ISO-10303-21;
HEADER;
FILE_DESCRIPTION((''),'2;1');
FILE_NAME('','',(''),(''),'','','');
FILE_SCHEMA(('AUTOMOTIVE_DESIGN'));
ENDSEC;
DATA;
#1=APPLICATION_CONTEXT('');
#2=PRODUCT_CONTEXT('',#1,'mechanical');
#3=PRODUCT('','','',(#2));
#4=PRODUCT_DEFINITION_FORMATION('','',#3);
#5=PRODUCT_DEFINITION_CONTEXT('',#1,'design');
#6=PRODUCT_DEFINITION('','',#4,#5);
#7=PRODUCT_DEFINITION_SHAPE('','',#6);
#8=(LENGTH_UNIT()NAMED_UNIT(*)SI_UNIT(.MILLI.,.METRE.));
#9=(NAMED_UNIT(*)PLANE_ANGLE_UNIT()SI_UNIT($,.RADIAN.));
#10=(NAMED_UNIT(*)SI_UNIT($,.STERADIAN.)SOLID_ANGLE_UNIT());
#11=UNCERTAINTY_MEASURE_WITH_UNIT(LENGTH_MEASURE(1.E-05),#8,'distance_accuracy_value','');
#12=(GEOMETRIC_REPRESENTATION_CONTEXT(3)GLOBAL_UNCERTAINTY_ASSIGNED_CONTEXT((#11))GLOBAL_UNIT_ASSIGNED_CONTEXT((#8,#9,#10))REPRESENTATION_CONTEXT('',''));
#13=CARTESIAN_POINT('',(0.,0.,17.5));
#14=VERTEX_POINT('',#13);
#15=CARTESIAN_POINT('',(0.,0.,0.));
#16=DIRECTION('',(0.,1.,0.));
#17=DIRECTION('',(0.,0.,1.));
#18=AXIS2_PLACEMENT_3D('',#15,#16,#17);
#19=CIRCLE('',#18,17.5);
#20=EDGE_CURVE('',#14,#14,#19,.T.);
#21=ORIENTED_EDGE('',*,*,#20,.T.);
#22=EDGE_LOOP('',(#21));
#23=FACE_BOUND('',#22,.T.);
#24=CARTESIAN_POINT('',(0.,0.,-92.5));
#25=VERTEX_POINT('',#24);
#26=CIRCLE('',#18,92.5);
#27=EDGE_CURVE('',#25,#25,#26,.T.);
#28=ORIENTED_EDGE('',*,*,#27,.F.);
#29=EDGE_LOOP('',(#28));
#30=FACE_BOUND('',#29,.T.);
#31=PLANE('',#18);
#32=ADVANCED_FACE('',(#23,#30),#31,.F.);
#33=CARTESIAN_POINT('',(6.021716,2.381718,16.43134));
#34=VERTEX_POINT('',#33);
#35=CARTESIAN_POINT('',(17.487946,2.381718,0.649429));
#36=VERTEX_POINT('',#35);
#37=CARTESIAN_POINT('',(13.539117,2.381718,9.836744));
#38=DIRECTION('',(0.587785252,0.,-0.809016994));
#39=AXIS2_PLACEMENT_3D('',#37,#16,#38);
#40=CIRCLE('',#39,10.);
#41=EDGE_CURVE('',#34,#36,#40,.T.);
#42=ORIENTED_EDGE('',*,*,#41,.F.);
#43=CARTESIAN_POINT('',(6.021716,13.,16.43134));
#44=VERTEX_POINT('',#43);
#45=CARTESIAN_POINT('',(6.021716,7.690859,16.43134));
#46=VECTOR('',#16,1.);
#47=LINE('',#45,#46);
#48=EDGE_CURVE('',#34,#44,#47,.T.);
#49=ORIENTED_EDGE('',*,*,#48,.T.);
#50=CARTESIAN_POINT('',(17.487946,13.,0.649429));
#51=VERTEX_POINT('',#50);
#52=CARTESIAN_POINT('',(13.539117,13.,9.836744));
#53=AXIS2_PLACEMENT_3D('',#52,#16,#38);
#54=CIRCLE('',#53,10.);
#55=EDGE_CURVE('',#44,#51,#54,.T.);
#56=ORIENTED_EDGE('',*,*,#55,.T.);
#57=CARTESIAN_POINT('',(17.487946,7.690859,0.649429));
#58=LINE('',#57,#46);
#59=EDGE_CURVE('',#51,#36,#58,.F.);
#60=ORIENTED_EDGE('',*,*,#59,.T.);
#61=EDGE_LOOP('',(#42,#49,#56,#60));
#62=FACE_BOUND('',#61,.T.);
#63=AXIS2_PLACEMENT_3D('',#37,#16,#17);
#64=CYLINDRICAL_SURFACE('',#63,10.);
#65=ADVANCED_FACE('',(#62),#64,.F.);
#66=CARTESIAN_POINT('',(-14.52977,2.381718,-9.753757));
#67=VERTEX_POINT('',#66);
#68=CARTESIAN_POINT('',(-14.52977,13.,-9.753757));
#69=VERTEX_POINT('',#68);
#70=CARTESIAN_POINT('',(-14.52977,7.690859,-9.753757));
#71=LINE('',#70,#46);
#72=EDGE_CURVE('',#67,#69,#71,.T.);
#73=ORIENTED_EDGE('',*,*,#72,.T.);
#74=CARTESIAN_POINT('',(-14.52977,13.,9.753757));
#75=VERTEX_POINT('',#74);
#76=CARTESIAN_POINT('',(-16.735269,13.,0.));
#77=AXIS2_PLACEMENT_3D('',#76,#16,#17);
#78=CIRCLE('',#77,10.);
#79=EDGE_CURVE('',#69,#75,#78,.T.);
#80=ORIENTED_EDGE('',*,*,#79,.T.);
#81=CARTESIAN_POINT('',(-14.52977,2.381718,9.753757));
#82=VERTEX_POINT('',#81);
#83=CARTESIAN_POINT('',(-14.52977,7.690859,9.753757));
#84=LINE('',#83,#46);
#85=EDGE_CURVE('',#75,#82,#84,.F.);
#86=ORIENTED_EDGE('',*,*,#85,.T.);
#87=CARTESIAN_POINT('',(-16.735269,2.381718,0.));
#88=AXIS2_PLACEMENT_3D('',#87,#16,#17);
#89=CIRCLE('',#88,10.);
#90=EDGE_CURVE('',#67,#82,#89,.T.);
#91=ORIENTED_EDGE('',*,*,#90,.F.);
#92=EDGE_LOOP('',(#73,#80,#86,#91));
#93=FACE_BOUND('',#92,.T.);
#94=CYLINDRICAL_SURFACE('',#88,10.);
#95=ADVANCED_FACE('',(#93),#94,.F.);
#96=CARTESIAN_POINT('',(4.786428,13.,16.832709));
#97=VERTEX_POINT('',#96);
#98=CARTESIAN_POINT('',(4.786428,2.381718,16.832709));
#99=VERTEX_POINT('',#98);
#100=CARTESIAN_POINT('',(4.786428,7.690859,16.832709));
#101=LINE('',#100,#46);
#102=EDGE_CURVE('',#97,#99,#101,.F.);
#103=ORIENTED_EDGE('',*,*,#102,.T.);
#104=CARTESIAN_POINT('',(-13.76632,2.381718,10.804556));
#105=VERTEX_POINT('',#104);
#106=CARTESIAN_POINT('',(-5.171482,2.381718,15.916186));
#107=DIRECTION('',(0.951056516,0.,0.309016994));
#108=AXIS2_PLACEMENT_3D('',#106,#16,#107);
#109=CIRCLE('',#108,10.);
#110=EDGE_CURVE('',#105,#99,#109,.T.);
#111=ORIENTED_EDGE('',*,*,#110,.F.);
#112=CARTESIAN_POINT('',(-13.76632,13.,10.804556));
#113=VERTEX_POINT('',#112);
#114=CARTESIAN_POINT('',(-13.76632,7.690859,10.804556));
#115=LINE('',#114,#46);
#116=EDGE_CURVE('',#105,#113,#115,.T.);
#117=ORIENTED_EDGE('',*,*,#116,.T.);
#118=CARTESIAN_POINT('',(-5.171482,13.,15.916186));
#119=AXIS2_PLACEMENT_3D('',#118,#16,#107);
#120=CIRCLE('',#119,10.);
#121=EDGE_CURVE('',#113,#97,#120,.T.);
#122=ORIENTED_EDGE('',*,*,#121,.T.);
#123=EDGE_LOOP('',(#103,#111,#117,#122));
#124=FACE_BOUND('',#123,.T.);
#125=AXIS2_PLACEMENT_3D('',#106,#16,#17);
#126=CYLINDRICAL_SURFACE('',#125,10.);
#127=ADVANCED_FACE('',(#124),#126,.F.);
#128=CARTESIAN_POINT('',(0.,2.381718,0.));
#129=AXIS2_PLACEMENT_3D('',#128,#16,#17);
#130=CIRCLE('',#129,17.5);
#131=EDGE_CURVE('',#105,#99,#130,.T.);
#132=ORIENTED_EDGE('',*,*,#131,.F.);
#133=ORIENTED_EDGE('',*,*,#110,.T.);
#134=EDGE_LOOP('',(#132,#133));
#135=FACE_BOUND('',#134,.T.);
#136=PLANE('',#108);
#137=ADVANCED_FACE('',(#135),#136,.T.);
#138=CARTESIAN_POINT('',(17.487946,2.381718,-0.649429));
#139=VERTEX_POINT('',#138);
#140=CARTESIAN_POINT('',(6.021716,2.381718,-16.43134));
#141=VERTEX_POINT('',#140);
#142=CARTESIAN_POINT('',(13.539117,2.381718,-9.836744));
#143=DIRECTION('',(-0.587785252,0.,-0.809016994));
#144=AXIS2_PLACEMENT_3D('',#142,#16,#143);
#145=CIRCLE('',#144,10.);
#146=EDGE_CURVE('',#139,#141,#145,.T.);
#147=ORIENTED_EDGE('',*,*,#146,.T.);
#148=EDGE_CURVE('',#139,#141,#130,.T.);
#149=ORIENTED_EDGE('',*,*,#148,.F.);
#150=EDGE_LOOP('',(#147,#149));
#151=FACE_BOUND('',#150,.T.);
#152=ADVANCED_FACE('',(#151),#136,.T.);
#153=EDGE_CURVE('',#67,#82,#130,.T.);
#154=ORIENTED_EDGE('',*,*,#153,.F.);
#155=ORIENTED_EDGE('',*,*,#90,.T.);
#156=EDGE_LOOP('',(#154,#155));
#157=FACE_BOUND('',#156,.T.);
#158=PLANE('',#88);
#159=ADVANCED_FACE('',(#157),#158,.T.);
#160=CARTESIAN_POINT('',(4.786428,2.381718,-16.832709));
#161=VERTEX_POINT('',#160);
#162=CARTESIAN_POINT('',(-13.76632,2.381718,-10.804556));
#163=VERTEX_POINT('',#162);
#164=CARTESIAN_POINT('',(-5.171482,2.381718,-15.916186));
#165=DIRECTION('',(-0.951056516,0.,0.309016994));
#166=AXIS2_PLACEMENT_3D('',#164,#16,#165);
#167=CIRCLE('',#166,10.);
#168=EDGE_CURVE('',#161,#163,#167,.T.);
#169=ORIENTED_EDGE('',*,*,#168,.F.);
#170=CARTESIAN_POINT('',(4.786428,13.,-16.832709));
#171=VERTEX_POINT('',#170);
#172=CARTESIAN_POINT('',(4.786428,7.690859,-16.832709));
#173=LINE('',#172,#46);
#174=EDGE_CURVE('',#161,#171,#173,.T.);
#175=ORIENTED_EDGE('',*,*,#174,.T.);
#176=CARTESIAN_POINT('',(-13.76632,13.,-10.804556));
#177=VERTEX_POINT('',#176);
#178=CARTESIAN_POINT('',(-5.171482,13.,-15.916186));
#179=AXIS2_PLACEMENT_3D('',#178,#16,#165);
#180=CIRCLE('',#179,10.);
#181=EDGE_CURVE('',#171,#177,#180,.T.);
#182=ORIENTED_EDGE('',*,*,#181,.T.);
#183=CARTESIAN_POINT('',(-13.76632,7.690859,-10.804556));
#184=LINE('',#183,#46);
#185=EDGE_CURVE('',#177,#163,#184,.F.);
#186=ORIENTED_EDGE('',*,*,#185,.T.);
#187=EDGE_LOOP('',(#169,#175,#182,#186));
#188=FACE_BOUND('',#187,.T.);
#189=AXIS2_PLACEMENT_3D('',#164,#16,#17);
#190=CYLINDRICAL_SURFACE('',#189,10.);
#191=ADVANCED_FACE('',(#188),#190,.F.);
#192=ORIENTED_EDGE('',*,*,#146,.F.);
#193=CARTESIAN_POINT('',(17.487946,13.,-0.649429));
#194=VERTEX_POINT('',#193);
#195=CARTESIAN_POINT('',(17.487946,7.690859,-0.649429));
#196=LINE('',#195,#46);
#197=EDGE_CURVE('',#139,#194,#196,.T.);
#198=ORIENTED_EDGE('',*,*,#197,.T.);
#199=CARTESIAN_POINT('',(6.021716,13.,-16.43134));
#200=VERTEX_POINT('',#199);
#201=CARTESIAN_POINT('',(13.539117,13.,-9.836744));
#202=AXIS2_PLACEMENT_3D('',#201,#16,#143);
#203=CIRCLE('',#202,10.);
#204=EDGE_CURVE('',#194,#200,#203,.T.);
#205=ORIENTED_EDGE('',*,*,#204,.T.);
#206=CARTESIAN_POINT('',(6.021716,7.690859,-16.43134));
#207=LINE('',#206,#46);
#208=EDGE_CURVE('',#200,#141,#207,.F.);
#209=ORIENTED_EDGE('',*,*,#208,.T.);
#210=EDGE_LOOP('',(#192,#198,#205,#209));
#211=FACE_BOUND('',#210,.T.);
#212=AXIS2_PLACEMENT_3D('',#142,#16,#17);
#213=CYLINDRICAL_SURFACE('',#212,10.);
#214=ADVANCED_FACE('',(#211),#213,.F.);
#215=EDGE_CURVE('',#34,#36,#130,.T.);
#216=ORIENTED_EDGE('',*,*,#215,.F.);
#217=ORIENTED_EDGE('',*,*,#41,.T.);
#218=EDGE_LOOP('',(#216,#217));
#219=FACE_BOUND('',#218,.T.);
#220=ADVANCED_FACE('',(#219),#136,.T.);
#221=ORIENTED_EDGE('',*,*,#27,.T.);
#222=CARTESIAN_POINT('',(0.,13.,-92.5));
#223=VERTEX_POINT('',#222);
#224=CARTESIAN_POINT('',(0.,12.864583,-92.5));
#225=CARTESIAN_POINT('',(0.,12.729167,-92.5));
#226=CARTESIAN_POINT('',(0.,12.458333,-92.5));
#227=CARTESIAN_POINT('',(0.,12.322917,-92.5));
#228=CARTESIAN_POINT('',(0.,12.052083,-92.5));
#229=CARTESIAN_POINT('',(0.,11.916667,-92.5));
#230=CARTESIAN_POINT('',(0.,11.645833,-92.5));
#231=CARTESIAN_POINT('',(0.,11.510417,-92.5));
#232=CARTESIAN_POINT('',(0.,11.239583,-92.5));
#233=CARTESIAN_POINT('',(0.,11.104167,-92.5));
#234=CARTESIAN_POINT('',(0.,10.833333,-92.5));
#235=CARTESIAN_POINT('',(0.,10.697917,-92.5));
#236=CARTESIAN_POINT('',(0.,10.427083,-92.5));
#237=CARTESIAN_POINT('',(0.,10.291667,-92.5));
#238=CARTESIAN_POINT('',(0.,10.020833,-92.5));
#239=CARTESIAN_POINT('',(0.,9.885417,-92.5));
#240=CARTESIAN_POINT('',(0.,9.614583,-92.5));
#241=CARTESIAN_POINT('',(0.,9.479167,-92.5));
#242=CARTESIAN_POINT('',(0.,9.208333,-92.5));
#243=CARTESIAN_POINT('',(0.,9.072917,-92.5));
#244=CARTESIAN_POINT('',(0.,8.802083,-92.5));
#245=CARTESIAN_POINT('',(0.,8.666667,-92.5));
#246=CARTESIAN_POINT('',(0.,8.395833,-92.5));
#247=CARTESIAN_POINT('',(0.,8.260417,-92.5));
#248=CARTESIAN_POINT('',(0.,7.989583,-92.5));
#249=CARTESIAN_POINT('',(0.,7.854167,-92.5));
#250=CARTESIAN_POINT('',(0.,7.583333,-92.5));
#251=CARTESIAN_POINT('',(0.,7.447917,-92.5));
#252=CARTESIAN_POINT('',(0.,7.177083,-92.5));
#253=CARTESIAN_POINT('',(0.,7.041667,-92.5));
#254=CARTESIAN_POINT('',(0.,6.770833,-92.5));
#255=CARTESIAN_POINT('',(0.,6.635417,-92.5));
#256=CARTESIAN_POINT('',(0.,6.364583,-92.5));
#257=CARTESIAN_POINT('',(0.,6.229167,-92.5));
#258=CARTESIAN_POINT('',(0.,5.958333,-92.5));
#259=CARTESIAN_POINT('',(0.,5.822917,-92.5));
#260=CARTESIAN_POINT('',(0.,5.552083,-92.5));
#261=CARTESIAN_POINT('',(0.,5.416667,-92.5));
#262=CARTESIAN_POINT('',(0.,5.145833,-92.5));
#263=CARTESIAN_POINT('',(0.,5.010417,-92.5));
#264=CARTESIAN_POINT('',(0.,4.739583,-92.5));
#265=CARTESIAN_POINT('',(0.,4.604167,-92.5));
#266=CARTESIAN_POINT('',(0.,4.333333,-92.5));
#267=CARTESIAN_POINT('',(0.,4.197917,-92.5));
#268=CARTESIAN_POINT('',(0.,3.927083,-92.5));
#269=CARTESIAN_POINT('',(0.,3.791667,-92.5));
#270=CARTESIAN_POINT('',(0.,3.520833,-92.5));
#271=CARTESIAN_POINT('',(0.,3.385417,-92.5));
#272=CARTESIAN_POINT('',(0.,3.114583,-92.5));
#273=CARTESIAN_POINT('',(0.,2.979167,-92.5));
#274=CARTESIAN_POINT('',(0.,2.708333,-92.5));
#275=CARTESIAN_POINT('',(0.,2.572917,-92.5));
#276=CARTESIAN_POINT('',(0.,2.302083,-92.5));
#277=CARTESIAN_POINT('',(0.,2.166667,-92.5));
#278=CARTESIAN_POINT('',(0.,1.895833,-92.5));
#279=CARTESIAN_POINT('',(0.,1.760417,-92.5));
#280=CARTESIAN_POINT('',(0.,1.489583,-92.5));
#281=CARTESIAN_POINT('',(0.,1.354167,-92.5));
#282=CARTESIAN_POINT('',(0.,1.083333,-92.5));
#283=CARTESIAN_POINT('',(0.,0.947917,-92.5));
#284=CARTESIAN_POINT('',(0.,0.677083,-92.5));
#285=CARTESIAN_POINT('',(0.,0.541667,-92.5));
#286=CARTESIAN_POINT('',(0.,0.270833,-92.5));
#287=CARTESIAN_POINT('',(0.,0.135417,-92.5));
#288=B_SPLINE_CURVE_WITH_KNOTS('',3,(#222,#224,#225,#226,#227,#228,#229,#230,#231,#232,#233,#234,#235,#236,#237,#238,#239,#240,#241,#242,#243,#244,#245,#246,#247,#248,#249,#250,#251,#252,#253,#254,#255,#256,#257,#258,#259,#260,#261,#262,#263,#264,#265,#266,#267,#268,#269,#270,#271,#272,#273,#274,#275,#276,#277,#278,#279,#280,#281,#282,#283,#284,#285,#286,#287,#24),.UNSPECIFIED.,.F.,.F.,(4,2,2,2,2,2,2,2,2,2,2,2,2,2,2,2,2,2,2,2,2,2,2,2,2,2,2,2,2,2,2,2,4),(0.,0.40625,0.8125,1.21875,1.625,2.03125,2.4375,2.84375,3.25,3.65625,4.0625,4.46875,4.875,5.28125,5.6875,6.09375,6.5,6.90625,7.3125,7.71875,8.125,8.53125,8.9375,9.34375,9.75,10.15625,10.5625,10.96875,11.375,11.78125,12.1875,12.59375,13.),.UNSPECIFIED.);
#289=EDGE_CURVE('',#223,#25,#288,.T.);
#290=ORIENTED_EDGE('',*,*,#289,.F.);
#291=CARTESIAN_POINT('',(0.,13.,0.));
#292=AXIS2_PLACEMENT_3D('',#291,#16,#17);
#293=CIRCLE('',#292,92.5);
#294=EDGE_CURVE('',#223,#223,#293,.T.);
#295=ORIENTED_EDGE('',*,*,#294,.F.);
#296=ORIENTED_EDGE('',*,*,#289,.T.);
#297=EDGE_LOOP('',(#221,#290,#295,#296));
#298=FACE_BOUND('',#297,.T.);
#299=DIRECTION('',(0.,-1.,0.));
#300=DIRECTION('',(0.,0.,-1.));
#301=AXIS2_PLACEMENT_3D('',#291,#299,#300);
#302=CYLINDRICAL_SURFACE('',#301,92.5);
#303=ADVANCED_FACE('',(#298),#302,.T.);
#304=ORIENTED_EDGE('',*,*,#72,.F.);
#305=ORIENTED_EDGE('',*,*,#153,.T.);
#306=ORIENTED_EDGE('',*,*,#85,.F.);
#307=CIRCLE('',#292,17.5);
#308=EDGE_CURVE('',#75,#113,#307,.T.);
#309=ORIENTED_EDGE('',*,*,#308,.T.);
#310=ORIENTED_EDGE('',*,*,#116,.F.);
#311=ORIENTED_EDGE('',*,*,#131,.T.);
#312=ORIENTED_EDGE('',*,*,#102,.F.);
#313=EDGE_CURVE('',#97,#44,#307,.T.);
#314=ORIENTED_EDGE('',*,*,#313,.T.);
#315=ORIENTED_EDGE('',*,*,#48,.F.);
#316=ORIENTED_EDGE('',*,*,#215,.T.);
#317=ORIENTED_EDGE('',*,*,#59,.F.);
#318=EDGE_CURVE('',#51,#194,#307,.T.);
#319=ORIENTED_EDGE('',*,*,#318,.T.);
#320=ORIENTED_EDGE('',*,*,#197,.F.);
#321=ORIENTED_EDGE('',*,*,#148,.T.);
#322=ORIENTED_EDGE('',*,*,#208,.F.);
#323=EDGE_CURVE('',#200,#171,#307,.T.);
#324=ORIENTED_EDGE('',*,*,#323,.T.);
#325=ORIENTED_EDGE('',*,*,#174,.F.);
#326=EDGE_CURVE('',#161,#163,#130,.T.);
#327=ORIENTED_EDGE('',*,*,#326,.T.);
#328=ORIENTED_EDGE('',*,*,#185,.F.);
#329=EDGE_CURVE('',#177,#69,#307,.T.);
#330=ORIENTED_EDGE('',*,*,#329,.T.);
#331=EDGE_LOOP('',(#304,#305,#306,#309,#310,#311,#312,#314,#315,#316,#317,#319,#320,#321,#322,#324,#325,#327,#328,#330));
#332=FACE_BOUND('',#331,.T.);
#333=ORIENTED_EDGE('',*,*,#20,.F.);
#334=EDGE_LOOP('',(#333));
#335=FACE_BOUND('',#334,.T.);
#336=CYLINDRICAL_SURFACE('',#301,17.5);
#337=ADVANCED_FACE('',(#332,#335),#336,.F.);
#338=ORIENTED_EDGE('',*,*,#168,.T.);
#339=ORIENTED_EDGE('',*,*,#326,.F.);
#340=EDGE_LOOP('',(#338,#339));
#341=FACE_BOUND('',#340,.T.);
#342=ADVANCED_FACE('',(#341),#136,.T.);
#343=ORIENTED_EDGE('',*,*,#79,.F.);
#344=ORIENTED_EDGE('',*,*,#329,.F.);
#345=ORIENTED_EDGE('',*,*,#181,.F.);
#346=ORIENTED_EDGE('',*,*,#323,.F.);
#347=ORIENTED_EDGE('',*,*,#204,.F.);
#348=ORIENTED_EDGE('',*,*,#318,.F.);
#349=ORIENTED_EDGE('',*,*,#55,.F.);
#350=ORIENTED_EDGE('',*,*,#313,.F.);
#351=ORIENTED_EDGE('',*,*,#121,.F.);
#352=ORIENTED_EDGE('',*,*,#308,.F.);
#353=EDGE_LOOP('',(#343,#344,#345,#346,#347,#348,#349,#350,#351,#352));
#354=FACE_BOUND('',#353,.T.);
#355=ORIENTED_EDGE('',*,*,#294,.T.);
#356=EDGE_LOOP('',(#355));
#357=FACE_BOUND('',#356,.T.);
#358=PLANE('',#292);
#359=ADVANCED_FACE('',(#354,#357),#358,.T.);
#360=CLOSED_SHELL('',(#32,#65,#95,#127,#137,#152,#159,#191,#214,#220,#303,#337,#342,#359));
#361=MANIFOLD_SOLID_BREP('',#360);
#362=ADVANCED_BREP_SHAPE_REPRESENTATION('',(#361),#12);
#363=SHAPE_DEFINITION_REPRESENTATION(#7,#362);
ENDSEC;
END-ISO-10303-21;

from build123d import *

# Parameters (mm, degrees)
SKETCH1_R           = 92.5
BOSS_EXTRUDE1_DEPTH = 13
SKETCH2_R           = 17.5
CUT_EXTRUDE1_DEPTH  = 132.459119121
SKETCH3_R           = 10
CUT_EXTRUDE2_DEPTH  = 10.618281544
CIRPATTERN1_COUNT   = 5


with BuildPart() as part:
    # Sketch1 → Boss-Extrude1 (new body)
    with BuildSketch(Plane(origin=(0, 0, 0), x_dir=(1, 0, 0), z_dir=(0, 1, 0))):
        Circle(SKETCH1_R)
    extrude(amount=BOSS_EXTRUDE1_DEPTH)

    # Sketch2 → Cut-Extrude1 (cut, through all)
    with BuildSketch(Plane(origin=(0, 0, 0), x_dir=(1, 0, 0), z_dir=(0, 1, 0))):
        Circle(SKETCH2_R)
    extrude(amount=CUT_EXTRUDE1_DEPTH, mode=Mode.SUBTRACT)

    # Sketch3 → Cut-Extrude2 (cut)
    with BuildSketch(Plane(origin=(0, 13, 0), x_dir=(1, 0, 0), z_dir=(0, 1, 0))):
        with Locations((-16.735268537, 0)):
            Circle(SKETCH3_R)
    cut_extrude2 = extrude(amount=-CUT_EXTRUDE2_DEPTH, mode=Mode.SUBTRACT)

    # CirPattern1: Cut-Extrude2 ×5 about axis
    cirpattern1_axis = Axis((0, 0, 0), (0, 1, 0))
    for i in range(1, CIRPATTERN1_COUNT):
        add(cut_extrude2.rotate(cirpattern1_axis, i * 360 / CIRPATTERN1_COUNT), mode=Mode.SUBTRACT)


solid = part.part
